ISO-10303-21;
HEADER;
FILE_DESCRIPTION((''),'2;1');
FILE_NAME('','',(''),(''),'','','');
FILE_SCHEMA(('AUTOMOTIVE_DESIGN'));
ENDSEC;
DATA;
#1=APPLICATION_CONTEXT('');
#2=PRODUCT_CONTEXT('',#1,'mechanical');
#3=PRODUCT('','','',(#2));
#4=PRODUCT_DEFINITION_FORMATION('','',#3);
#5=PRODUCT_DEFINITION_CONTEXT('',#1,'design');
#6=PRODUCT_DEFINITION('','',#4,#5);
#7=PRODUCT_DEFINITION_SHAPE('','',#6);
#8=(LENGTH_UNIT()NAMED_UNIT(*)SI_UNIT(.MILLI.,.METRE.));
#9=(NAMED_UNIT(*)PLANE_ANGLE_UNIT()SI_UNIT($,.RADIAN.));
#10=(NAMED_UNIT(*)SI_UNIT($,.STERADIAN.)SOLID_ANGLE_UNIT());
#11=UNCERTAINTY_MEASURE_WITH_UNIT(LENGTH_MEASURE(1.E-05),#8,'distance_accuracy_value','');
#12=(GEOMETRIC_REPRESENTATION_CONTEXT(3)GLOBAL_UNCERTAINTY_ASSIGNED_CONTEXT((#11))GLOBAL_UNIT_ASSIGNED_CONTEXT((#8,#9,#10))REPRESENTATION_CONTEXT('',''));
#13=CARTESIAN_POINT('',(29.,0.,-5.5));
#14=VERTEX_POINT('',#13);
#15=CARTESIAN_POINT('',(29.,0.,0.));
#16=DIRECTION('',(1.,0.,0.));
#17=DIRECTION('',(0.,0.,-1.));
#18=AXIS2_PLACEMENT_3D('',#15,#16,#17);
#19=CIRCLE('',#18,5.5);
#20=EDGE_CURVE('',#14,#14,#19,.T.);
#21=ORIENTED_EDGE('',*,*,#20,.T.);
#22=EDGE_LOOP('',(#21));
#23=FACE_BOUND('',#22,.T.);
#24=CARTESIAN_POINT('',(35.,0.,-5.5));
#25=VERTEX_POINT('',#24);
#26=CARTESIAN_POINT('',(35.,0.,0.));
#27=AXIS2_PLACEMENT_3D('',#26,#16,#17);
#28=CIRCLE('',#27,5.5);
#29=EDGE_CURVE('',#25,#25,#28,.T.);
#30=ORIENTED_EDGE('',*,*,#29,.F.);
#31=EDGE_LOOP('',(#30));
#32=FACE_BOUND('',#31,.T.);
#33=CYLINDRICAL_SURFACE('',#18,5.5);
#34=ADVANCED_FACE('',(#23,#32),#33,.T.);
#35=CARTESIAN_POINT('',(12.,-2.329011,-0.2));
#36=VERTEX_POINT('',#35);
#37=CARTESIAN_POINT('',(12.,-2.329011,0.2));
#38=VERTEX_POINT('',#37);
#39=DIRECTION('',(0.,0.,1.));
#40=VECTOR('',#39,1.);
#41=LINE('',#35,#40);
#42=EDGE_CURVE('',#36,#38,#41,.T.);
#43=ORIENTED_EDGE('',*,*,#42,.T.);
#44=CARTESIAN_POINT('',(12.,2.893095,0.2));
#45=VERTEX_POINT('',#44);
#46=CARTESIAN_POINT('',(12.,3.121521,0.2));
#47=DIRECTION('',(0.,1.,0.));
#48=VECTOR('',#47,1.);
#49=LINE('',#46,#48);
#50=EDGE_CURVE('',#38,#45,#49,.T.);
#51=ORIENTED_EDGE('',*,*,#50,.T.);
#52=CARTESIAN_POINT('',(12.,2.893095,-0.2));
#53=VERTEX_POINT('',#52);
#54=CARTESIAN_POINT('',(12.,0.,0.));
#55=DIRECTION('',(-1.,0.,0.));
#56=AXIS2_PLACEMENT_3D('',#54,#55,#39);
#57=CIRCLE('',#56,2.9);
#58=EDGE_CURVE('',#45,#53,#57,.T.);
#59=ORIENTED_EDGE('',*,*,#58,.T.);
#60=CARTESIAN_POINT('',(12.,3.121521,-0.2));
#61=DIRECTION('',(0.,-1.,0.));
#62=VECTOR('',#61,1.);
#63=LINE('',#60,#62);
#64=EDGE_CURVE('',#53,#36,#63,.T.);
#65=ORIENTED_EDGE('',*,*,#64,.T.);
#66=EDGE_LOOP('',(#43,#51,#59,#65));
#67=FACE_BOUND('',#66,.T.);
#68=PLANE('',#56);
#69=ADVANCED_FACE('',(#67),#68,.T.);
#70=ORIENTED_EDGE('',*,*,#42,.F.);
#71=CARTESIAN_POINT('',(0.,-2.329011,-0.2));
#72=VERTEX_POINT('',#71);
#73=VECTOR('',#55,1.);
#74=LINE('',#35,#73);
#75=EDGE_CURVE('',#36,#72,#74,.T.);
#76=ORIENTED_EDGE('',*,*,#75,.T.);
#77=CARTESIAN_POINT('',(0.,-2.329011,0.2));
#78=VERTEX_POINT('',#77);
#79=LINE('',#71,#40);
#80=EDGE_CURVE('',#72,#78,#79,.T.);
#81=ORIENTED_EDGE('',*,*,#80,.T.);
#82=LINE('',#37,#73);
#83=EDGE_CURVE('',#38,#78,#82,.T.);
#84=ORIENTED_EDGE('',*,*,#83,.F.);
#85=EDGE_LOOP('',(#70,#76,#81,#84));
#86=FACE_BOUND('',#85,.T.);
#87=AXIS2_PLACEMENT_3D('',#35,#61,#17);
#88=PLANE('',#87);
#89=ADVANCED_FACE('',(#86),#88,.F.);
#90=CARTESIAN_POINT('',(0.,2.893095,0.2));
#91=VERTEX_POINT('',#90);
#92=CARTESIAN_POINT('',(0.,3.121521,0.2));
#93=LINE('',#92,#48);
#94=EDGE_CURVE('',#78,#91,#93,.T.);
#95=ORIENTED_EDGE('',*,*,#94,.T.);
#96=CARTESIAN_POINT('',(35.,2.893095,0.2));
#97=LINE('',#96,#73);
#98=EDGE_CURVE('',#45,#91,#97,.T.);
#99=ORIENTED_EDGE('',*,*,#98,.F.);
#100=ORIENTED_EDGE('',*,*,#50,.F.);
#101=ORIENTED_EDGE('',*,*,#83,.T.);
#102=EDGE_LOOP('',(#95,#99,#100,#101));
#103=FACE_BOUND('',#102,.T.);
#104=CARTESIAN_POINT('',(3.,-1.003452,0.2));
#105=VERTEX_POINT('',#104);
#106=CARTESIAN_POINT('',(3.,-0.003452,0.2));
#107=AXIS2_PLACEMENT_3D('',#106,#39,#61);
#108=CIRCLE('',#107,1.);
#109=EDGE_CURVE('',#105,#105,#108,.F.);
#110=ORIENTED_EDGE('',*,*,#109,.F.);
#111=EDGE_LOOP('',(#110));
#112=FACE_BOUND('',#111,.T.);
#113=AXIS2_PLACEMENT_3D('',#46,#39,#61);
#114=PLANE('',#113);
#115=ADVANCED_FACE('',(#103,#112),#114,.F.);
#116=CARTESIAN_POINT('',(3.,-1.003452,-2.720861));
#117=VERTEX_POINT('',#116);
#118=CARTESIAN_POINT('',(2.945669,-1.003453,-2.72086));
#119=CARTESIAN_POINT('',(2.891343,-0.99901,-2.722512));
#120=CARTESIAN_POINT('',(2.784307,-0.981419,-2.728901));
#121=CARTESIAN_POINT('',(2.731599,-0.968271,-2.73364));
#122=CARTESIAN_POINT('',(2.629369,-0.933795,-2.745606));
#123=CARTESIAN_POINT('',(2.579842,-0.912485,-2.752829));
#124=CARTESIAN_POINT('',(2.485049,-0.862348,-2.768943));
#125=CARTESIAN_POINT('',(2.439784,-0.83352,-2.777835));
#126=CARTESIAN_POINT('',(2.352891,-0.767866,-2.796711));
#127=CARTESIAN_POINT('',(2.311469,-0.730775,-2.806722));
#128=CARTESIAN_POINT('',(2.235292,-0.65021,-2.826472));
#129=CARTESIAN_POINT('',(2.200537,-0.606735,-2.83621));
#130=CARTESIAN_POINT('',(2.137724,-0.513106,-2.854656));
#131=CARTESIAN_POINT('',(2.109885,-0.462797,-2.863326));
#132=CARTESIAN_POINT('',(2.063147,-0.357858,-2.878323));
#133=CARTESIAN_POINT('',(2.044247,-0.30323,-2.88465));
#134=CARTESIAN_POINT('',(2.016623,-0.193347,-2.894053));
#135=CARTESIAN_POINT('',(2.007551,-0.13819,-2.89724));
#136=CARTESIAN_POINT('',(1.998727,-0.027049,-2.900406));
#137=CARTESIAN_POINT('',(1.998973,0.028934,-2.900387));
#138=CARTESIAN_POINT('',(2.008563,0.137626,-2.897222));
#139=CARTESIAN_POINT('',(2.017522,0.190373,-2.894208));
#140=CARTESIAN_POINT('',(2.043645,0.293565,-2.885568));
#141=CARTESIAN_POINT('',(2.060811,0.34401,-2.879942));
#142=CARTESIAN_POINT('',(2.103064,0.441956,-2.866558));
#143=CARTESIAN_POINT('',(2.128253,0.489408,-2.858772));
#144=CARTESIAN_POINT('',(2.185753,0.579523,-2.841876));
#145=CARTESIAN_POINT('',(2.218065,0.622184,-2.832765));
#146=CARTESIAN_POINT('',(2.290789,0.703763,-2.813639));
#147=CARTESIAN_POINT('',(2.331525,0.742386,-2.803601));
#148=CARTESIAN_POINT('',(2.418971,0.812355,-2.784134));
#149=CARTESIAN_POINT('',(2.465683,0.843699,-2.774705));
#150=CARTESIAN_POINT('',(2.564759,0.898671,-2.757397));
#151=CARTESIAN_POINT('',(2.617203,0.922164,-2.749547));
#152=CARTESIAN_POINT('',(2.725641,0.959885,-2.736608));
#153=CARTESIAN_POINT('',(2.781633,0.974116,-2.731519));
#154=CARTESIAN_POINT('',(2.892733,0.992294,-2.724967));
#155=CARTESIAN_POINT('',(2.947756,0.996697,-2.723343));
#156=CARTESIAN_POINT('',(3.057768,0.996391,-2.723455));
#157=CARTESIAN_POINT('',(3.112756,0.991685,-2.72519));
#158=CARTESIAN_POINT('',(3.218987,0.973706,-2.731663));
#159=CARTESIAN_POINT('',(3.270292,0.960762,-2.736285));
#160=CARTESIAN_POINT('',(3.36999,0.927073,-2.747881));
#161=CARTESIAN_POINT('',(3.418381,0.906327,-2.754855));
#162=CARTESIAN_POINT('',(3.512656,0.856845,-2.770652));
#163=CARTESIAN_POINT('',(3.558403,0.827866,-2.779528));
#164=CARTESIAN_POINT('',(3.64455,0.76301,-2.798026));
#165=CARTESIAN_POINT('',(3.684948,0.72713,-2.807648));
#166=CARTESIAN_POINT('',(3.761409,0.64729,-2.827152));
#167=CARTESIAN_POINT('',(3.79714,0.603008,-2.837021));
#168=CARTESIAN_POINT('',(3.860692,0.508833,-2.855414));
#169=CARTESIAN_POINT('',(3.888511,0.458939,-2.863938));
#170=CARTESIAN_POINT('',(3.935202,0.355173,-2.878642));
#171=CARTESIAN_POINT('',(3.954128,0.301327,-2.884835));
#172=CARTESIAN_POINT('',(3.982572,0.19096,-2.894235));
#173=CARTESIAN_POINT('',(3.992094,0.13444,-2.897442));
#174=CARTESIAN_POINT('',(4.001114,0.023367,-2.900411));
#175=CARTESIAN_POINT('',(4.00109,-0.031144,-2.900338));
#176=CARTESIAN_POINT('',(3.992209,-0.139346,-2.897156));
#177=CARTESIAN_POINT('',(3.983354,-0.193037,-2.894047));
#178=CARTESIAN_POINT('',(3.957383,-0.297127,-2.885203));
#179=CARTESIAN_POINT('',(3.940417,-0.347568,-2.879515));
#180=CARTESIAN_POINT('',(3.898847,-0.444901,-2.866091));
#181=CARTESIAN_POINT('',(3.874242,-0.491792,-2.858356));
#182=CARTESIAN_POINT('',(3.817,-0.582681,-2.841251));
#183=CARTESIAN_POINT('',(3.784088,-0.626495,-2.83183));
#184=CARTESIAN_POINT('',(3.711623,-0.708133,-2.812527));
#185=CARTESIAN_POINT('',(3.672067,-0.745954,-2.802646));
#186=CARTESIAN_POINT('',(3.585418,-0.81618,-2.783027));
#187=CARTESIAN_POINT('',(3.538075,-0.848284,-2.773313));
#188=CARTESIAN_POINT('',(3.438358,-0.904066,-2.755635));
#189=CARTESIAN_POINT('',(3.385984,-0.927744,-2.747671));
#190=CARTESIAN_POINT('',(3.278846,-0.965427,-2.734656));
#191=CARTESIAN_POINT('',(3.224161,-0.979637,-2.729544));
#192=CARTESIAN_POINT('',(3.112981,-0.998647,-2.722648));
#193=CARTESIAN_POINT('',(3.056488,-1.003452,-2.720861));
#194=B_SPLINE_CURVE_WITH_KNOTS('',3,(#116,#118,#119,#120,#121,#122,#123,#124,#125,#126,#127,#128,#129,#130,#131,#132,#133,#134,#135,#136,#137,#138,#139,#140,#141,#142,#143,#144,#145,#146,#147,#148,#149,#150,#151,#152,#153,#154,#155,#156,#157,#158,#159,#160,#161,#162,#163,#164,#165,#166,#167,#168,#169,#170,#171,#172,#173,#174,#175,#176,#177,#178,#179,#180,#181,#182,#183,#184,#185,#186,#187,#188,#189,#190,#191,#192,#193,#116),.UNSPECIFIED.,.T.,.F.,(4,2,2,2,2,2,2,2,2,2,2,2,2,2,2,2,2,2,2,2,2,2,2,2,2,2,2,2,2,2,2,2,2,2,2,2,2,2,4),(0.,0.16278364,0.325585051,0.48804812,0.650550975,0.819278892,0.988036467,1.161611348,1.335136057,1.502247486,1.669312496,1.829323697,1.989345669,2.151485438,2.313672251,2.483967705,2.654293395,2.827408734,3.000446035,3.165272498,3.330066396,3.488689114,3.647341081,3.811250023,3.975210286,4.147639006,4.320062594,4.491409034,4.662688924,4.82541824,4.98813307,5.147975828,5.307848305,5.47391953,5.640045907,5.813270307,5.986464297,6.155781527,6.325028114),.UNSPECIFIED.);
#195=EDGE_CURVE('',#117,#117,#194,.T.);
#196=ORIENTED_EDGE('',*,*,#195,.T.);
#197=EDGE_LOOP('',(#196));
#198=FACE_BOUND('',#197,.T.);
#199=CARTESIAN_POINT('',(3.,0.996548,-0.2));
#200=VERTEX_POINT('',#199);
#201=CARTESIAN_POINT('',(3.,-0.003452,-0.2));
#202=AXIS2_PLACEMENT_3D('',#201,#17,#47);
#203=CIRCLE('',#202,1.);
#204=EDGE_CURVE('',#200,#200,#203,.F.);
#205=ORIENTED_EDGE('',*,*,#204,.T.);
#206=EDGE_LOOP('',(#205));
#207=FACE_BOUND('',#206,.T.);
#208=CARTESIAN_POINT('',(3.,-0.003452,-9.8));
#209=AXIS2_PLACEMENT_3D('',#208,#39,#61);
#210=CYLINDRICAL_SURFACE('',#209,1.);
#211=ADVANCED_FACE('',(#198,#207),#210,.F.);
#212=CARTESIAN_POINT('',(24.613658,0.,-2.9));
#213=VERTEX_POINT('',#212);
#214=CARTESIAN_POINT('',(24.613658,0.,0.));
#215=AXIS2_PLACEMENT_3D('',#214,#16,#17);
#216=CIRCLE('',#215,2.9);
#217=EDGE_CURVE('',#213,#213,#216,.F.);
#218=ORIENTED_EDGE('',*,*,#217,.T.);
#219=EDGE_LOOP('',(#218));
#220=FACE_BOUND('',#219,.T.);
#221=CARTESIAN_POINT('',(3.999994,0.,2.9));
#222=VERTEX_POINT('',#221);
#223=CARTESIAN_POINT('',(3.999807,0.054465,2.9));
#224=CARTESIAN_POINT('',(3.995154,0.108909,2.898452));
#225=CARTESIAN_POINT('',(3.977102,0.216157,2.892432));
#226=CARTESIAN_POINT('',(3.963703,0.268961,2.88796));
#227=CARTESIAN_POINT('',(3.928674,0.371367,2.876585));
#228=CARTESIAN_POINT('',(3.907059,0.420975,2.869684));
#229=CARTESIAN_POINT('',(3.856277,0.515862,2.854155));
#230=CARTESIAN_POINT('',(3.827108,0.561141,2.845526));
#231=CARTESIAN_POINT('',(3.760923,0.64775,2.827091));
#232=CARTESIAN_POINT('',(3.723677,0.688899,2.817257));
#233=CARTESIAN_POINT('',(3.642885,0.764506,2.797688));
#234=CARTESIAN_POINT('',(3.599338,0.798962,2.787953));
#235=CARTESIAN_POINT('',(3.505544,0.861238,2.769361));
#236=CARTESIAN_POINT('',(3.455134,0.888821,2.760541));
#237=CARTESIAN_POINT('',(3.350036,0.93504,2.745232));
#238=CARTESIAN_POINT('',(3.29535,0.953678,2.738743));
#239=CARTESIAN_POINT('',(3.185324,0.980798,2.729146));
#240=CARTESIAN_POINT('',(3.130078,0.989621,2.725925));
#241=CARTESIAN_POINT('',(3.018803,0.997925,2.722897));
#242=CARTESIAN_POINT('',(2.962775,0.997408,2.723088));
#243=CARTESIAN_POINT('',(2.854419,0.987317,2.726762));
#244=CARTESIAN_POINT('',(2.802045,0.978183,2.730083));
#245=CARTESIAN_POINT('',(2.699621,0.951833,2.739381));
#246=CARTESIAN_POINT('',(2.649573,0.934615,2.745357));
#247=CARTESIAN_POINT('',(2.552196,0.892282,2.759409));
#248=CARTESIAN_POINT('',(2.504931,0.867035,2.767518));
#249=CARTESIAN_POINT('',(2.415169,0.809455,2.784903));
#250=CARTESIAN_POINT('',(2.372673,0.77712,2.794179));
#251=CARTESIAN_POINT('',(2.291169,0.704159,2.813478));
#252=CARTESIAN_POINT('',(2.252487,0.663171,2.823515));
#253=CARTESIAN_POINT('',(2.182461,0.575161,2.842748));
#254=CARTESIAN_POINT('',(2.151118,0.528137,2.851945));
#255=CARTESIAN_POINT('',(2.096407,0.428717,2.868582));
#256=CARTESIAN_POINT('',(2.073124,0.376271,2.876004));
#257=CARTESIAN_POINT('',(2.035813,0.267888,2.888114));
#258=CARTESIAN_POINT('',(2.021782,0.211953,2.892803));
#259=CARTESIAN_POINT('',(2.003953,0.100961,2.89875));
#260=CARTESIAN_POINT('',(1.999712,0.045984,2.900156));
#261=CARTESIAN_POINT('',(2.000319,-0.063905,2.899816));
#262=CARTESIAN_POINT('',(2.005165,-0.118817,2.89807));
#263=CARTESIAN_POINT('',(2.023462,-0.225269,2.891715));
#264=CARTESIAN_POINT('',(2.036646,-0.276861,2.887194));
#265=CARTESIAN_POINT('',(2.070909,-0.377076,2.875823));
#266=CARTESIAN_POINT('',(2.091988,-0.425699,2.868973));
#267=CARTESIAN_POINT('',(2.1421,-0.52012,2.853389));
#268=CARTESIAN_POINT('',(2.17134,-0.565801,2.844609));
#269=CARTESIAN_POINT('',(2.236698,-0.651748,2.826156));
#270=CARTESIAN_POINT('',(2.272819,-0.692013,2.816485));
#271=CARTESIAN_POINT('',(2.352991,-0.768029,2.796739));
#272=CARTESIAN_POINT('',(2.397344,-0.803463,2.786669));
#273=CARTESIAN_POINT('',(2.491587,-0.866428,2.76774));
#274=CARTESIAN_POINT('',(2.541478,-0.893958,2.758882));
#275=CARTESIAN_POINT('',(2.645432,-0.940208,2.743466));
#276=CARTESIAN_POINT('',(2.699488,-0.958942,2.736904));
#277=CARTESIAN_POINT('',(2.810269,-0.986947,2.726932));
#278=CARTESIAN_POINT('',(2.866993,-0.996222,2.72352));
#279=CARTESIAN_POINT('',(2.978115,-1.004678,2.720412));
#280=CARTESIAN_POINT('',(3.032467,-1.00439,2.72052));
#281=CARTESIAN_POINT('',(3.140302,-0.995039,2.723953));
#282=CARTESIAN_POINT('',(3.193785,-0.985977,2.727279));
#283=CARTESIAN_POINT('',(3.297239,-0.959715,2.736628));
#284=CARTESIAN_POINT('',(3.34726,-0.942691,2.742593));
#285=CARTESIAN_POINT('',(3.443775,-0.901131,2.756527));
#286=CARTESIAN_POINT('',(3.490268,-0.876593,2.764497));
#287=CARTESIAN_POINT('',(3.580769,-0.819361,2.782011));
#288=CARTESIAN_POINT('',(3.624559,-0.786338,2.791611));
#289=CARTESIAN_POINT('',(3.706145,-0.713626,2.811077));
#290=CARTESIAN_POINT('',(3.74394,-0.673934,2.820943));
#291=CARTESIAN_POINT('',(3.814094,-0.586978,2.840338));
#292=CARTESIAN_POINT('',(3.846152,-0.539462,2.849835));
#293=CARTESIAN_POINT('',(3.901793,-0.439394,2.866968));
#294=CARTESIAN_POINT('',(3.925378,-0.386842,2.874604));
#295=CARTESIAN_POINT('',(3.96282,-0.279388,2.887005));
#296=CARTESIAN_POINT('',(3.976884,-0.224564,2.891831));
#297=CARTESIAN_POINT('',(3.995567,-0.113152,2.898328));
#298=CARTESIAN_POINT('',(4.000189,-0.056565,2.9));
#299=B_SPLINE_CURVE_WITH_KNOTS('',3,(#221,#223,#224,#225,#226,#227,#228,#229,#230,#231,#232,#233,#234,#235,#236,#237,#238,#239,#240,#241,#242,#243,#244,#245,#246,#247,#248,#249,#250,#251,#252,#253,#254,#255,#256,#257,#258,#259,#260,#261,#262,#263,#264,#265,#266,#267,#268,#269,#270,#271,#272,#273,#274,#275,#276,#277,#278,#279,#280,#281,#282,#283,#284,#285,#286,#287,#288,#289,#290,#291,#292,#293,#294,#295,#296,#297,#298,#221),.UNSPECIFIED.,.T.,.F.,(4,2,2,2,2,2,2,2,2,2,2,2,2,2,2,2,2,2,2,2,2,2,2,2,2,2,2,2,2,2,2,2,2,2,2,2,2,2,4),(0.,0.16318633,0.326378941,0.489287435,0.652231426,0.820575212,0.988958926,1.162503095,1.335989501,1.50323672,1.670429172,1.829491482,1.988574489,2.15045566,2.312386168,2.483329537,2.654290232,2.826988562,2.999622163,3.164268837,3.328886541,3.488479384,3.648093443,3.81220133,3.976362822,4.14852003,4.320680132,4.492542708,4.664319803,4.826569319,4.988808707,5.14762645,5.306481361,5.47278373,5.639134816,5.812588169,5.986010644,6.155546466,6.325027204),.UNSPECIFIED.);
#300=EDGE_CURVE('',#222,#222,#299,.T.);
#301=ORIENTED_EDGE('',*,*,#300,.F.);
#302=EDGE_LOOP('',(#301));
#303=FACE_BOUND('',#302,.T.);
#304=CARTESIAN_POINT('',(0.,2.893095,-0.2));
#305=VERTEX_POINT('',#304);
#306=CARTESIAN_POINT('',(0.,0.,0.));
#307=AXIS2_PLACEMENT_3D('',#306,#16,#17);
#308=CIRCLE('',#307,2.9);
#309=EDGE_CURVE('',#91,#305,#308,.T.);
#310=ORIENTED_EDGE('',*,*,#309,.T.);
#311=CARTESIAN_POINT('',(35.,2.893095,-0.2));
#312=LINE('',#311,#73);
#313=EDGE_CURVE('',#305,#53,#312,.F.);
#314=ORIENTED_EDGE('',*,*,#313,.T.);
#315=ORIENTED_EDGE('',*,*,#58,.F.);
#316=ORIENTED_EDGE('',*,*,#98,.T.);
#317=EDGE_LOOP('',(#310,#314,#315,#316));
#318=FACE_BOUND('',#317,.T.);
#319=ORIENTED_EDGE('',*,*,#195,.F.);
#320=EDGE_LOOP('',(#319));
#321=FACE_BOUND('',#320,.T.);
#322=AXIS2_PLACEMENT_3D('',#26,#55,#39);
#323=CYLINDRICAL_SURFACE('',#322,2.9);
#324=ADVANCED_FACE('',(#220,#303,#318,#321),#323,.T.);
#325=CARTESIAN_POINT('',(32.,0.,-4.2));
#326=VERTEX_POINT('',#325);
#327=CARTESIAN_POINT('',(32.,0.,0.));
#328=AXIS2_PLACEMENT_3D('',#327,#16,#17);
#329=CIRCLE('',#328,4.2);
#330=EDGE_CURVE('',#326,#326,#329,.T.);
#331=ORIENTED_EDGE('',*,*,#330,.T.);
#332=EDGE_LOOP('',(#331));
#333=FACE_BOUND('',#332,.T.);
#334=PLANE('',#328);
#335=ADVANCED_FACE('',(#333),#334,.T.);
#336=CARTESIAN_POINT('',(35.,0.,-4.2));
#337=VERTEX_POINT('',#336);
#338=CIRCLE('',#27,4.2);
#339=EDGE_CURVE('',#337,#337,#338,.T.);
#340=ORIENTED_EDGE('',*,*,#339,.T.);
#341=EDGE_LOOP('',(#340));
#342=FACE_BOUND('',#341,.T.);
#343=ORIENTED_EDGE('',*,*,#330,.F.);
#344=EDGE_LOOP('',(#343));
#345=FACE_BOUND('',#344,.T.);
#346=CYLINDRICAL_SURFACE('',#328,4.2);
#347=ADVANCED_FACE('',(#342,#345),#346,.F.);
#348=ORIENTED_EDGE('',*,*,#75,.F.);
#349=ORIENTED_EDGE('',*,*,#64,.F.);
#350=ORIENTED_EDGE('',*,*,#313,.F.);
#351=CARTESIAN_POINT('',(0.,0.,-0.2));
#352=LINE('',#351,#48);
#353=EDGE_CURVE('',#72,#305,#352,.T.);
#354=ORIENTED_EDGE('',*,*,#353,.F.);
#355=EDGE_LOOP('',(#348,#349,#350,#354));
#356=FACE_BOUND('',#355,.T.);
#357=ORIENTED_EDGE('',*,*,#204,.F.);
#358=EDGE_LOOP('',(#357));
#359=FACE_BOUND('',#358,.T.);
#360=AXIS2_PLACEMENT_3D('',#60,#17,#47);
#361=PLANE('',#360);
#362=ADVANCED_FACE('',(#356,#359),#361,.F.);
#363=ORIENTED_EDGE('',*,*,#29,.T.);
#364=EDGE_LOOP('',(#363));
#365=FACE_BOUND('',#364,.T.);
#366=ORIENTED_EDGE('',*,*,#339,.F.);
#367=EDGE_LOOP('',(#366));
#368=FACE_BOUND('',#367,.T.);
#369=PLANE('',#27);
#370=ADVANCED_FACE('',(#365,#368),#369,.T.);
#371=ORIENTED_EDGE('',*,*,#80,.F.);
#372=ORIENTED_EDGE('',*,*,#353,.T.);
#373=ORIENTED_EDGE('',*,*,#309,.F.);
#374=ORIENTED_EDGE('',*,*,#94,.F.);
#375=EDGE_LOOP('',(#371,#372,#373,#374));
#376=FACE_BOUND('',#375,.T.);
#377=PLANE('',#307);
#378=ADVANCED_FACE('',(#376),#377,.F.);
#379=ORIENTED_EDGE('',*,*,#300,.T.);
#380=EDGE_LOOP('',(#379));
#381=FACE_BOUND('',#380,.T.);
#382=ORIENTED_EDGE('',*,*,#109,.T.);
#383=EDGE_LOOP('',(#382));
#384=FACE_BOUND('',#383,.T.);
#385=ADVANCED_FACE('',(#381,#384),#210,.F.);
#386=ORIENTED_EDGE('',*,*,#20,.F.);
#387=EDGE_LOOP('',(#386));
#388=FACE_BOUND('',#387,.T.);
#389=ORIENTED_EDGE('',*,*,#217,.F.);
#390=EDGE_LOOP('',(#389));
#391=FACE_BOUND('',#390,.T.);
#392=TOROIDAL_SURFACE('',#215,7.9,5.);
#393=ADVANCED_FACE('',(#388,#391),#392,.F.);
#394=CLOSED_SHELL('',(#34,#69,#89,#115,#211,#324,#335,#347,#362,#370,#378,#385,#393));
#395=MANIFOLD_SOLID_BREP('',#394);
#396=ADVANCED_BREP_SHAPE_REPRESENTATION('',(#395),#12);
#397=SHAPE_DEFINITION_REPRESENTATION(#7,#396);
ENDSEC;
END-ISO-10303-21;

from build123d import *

# Parameters (mm, degrees)
SKETCH_1_R               = 2.9
EXTRUDE_1_DEPTH          = 35
SKETCH_2_W               = 0.4
SKETCH_2_H               = 5.450532248
CUT_EXTRUDE_1_DEPTH      = 12
CUT_EXTRUDE_2_DEPTH      = 10
CUT_EXTRUDE_2_DEPTH_BACK = 10
SKETCH_3_R               = 1
SKETCH_4_R               = 5.5
EXTRUDE_2_DEPTH          = 6
SKETCH_5_R               = 4.2
CUT_EXTRUDE_3_DEPTH      = 3
FILLET_1_R               = 5


with BuildPart() as part:
    # 草图1 → 凸台-拉伸1 (new body)
    with BuildSketch(Plane(origin=(0, 0, 0), x_dir=(0, 0, -1), z_dir=(1, 0, 0))):
        Circle(SKETCH_1_R)
    extrude(amount=EXTRUDE_1_DEPTH)

    # 草图2 → 切除-拉伸1 (cut)
    with BuildSketch(Plane.ZY):
        with Locations((0, 0.396255312)):
            Rectangle(SKETCH_2_W, SKETCH_2_H)
    extrude(amount=-CUT_EXTRUDE_1_DEPTH, mode=Mode.SUBTRACT)

    # 草图3 → 切除-拉伸2 (cut, two sides: drawn at the far end of the back side and taken through both)
    with BuildSketch(Plane(origin=(0, 0, 0.2), x_dir=(-1, 0, 0), z_dir=(0, 0, -1)).offset(-CUT_EXTRUDE_2_DEPTH_BACK)):
        with Locations(Location((-3, -0.003452386, 0), (0, 0, 270))):
            Circle(SKETCH_3_R)
    extrude(amount=CUT_EXTRUDE_2_DEPTH + CUT_EXTRUDE_2_DEPTH_BACK, mode=Mode.SUBTRACT)

    # 草图4 → 凸台-拉伸2 (add)
    with BuildSketch(Plane(origin=(35, 0, 0), x_dir=(0, 0, -1), z_dir=(1, 0, 0))):
        Circle(SKETCH_4_R)
    extrude(amount=-EXTRUDE_2_DEPTH)

    # 草图5 → 切除-拉伸3 (cut)
    with BuildSketch(Plane(origin=(35, 0, 0), x_dir=(0, 0, -1), z_dir=(1, 0, 0))):
        Circle(SKETCH_5_R)
    extrude(amount=-CUT_EXTRUDE_3_DEPTH, mode=Mode.SUBTRACT)

    # 圆角1
    # the kernel refuses this fillet: 5 mm, written as the material it adds along each edge
    with BuildSketch(Plane(origin=(29, 0, 0), x_dir=(0, 0, -1), z_dir=(0, 1, 0))) as fillet_1_piece_1:
        with BuildLine():
            CenterArc((7.9, 4.38634244), FILLET_1_R, 180, 61.314597986)
            Line((5.5, 0), (5.452, -0.087726849))
            ThreePointArc((5.452, -0.087726849), (4.2, -0.1), (2.9, -0.1))
            Line((2.9, -0.1), (2.8, 0))
            Line((2.8, 0), (2.8, 4.38634244))
            Line((2.8, 4.38634244), (2.9, 4.38634244))
        make_face()
    revolve(axis=Axis((29, 0, 0), (-1, 0, 0)))


solid = part.part
